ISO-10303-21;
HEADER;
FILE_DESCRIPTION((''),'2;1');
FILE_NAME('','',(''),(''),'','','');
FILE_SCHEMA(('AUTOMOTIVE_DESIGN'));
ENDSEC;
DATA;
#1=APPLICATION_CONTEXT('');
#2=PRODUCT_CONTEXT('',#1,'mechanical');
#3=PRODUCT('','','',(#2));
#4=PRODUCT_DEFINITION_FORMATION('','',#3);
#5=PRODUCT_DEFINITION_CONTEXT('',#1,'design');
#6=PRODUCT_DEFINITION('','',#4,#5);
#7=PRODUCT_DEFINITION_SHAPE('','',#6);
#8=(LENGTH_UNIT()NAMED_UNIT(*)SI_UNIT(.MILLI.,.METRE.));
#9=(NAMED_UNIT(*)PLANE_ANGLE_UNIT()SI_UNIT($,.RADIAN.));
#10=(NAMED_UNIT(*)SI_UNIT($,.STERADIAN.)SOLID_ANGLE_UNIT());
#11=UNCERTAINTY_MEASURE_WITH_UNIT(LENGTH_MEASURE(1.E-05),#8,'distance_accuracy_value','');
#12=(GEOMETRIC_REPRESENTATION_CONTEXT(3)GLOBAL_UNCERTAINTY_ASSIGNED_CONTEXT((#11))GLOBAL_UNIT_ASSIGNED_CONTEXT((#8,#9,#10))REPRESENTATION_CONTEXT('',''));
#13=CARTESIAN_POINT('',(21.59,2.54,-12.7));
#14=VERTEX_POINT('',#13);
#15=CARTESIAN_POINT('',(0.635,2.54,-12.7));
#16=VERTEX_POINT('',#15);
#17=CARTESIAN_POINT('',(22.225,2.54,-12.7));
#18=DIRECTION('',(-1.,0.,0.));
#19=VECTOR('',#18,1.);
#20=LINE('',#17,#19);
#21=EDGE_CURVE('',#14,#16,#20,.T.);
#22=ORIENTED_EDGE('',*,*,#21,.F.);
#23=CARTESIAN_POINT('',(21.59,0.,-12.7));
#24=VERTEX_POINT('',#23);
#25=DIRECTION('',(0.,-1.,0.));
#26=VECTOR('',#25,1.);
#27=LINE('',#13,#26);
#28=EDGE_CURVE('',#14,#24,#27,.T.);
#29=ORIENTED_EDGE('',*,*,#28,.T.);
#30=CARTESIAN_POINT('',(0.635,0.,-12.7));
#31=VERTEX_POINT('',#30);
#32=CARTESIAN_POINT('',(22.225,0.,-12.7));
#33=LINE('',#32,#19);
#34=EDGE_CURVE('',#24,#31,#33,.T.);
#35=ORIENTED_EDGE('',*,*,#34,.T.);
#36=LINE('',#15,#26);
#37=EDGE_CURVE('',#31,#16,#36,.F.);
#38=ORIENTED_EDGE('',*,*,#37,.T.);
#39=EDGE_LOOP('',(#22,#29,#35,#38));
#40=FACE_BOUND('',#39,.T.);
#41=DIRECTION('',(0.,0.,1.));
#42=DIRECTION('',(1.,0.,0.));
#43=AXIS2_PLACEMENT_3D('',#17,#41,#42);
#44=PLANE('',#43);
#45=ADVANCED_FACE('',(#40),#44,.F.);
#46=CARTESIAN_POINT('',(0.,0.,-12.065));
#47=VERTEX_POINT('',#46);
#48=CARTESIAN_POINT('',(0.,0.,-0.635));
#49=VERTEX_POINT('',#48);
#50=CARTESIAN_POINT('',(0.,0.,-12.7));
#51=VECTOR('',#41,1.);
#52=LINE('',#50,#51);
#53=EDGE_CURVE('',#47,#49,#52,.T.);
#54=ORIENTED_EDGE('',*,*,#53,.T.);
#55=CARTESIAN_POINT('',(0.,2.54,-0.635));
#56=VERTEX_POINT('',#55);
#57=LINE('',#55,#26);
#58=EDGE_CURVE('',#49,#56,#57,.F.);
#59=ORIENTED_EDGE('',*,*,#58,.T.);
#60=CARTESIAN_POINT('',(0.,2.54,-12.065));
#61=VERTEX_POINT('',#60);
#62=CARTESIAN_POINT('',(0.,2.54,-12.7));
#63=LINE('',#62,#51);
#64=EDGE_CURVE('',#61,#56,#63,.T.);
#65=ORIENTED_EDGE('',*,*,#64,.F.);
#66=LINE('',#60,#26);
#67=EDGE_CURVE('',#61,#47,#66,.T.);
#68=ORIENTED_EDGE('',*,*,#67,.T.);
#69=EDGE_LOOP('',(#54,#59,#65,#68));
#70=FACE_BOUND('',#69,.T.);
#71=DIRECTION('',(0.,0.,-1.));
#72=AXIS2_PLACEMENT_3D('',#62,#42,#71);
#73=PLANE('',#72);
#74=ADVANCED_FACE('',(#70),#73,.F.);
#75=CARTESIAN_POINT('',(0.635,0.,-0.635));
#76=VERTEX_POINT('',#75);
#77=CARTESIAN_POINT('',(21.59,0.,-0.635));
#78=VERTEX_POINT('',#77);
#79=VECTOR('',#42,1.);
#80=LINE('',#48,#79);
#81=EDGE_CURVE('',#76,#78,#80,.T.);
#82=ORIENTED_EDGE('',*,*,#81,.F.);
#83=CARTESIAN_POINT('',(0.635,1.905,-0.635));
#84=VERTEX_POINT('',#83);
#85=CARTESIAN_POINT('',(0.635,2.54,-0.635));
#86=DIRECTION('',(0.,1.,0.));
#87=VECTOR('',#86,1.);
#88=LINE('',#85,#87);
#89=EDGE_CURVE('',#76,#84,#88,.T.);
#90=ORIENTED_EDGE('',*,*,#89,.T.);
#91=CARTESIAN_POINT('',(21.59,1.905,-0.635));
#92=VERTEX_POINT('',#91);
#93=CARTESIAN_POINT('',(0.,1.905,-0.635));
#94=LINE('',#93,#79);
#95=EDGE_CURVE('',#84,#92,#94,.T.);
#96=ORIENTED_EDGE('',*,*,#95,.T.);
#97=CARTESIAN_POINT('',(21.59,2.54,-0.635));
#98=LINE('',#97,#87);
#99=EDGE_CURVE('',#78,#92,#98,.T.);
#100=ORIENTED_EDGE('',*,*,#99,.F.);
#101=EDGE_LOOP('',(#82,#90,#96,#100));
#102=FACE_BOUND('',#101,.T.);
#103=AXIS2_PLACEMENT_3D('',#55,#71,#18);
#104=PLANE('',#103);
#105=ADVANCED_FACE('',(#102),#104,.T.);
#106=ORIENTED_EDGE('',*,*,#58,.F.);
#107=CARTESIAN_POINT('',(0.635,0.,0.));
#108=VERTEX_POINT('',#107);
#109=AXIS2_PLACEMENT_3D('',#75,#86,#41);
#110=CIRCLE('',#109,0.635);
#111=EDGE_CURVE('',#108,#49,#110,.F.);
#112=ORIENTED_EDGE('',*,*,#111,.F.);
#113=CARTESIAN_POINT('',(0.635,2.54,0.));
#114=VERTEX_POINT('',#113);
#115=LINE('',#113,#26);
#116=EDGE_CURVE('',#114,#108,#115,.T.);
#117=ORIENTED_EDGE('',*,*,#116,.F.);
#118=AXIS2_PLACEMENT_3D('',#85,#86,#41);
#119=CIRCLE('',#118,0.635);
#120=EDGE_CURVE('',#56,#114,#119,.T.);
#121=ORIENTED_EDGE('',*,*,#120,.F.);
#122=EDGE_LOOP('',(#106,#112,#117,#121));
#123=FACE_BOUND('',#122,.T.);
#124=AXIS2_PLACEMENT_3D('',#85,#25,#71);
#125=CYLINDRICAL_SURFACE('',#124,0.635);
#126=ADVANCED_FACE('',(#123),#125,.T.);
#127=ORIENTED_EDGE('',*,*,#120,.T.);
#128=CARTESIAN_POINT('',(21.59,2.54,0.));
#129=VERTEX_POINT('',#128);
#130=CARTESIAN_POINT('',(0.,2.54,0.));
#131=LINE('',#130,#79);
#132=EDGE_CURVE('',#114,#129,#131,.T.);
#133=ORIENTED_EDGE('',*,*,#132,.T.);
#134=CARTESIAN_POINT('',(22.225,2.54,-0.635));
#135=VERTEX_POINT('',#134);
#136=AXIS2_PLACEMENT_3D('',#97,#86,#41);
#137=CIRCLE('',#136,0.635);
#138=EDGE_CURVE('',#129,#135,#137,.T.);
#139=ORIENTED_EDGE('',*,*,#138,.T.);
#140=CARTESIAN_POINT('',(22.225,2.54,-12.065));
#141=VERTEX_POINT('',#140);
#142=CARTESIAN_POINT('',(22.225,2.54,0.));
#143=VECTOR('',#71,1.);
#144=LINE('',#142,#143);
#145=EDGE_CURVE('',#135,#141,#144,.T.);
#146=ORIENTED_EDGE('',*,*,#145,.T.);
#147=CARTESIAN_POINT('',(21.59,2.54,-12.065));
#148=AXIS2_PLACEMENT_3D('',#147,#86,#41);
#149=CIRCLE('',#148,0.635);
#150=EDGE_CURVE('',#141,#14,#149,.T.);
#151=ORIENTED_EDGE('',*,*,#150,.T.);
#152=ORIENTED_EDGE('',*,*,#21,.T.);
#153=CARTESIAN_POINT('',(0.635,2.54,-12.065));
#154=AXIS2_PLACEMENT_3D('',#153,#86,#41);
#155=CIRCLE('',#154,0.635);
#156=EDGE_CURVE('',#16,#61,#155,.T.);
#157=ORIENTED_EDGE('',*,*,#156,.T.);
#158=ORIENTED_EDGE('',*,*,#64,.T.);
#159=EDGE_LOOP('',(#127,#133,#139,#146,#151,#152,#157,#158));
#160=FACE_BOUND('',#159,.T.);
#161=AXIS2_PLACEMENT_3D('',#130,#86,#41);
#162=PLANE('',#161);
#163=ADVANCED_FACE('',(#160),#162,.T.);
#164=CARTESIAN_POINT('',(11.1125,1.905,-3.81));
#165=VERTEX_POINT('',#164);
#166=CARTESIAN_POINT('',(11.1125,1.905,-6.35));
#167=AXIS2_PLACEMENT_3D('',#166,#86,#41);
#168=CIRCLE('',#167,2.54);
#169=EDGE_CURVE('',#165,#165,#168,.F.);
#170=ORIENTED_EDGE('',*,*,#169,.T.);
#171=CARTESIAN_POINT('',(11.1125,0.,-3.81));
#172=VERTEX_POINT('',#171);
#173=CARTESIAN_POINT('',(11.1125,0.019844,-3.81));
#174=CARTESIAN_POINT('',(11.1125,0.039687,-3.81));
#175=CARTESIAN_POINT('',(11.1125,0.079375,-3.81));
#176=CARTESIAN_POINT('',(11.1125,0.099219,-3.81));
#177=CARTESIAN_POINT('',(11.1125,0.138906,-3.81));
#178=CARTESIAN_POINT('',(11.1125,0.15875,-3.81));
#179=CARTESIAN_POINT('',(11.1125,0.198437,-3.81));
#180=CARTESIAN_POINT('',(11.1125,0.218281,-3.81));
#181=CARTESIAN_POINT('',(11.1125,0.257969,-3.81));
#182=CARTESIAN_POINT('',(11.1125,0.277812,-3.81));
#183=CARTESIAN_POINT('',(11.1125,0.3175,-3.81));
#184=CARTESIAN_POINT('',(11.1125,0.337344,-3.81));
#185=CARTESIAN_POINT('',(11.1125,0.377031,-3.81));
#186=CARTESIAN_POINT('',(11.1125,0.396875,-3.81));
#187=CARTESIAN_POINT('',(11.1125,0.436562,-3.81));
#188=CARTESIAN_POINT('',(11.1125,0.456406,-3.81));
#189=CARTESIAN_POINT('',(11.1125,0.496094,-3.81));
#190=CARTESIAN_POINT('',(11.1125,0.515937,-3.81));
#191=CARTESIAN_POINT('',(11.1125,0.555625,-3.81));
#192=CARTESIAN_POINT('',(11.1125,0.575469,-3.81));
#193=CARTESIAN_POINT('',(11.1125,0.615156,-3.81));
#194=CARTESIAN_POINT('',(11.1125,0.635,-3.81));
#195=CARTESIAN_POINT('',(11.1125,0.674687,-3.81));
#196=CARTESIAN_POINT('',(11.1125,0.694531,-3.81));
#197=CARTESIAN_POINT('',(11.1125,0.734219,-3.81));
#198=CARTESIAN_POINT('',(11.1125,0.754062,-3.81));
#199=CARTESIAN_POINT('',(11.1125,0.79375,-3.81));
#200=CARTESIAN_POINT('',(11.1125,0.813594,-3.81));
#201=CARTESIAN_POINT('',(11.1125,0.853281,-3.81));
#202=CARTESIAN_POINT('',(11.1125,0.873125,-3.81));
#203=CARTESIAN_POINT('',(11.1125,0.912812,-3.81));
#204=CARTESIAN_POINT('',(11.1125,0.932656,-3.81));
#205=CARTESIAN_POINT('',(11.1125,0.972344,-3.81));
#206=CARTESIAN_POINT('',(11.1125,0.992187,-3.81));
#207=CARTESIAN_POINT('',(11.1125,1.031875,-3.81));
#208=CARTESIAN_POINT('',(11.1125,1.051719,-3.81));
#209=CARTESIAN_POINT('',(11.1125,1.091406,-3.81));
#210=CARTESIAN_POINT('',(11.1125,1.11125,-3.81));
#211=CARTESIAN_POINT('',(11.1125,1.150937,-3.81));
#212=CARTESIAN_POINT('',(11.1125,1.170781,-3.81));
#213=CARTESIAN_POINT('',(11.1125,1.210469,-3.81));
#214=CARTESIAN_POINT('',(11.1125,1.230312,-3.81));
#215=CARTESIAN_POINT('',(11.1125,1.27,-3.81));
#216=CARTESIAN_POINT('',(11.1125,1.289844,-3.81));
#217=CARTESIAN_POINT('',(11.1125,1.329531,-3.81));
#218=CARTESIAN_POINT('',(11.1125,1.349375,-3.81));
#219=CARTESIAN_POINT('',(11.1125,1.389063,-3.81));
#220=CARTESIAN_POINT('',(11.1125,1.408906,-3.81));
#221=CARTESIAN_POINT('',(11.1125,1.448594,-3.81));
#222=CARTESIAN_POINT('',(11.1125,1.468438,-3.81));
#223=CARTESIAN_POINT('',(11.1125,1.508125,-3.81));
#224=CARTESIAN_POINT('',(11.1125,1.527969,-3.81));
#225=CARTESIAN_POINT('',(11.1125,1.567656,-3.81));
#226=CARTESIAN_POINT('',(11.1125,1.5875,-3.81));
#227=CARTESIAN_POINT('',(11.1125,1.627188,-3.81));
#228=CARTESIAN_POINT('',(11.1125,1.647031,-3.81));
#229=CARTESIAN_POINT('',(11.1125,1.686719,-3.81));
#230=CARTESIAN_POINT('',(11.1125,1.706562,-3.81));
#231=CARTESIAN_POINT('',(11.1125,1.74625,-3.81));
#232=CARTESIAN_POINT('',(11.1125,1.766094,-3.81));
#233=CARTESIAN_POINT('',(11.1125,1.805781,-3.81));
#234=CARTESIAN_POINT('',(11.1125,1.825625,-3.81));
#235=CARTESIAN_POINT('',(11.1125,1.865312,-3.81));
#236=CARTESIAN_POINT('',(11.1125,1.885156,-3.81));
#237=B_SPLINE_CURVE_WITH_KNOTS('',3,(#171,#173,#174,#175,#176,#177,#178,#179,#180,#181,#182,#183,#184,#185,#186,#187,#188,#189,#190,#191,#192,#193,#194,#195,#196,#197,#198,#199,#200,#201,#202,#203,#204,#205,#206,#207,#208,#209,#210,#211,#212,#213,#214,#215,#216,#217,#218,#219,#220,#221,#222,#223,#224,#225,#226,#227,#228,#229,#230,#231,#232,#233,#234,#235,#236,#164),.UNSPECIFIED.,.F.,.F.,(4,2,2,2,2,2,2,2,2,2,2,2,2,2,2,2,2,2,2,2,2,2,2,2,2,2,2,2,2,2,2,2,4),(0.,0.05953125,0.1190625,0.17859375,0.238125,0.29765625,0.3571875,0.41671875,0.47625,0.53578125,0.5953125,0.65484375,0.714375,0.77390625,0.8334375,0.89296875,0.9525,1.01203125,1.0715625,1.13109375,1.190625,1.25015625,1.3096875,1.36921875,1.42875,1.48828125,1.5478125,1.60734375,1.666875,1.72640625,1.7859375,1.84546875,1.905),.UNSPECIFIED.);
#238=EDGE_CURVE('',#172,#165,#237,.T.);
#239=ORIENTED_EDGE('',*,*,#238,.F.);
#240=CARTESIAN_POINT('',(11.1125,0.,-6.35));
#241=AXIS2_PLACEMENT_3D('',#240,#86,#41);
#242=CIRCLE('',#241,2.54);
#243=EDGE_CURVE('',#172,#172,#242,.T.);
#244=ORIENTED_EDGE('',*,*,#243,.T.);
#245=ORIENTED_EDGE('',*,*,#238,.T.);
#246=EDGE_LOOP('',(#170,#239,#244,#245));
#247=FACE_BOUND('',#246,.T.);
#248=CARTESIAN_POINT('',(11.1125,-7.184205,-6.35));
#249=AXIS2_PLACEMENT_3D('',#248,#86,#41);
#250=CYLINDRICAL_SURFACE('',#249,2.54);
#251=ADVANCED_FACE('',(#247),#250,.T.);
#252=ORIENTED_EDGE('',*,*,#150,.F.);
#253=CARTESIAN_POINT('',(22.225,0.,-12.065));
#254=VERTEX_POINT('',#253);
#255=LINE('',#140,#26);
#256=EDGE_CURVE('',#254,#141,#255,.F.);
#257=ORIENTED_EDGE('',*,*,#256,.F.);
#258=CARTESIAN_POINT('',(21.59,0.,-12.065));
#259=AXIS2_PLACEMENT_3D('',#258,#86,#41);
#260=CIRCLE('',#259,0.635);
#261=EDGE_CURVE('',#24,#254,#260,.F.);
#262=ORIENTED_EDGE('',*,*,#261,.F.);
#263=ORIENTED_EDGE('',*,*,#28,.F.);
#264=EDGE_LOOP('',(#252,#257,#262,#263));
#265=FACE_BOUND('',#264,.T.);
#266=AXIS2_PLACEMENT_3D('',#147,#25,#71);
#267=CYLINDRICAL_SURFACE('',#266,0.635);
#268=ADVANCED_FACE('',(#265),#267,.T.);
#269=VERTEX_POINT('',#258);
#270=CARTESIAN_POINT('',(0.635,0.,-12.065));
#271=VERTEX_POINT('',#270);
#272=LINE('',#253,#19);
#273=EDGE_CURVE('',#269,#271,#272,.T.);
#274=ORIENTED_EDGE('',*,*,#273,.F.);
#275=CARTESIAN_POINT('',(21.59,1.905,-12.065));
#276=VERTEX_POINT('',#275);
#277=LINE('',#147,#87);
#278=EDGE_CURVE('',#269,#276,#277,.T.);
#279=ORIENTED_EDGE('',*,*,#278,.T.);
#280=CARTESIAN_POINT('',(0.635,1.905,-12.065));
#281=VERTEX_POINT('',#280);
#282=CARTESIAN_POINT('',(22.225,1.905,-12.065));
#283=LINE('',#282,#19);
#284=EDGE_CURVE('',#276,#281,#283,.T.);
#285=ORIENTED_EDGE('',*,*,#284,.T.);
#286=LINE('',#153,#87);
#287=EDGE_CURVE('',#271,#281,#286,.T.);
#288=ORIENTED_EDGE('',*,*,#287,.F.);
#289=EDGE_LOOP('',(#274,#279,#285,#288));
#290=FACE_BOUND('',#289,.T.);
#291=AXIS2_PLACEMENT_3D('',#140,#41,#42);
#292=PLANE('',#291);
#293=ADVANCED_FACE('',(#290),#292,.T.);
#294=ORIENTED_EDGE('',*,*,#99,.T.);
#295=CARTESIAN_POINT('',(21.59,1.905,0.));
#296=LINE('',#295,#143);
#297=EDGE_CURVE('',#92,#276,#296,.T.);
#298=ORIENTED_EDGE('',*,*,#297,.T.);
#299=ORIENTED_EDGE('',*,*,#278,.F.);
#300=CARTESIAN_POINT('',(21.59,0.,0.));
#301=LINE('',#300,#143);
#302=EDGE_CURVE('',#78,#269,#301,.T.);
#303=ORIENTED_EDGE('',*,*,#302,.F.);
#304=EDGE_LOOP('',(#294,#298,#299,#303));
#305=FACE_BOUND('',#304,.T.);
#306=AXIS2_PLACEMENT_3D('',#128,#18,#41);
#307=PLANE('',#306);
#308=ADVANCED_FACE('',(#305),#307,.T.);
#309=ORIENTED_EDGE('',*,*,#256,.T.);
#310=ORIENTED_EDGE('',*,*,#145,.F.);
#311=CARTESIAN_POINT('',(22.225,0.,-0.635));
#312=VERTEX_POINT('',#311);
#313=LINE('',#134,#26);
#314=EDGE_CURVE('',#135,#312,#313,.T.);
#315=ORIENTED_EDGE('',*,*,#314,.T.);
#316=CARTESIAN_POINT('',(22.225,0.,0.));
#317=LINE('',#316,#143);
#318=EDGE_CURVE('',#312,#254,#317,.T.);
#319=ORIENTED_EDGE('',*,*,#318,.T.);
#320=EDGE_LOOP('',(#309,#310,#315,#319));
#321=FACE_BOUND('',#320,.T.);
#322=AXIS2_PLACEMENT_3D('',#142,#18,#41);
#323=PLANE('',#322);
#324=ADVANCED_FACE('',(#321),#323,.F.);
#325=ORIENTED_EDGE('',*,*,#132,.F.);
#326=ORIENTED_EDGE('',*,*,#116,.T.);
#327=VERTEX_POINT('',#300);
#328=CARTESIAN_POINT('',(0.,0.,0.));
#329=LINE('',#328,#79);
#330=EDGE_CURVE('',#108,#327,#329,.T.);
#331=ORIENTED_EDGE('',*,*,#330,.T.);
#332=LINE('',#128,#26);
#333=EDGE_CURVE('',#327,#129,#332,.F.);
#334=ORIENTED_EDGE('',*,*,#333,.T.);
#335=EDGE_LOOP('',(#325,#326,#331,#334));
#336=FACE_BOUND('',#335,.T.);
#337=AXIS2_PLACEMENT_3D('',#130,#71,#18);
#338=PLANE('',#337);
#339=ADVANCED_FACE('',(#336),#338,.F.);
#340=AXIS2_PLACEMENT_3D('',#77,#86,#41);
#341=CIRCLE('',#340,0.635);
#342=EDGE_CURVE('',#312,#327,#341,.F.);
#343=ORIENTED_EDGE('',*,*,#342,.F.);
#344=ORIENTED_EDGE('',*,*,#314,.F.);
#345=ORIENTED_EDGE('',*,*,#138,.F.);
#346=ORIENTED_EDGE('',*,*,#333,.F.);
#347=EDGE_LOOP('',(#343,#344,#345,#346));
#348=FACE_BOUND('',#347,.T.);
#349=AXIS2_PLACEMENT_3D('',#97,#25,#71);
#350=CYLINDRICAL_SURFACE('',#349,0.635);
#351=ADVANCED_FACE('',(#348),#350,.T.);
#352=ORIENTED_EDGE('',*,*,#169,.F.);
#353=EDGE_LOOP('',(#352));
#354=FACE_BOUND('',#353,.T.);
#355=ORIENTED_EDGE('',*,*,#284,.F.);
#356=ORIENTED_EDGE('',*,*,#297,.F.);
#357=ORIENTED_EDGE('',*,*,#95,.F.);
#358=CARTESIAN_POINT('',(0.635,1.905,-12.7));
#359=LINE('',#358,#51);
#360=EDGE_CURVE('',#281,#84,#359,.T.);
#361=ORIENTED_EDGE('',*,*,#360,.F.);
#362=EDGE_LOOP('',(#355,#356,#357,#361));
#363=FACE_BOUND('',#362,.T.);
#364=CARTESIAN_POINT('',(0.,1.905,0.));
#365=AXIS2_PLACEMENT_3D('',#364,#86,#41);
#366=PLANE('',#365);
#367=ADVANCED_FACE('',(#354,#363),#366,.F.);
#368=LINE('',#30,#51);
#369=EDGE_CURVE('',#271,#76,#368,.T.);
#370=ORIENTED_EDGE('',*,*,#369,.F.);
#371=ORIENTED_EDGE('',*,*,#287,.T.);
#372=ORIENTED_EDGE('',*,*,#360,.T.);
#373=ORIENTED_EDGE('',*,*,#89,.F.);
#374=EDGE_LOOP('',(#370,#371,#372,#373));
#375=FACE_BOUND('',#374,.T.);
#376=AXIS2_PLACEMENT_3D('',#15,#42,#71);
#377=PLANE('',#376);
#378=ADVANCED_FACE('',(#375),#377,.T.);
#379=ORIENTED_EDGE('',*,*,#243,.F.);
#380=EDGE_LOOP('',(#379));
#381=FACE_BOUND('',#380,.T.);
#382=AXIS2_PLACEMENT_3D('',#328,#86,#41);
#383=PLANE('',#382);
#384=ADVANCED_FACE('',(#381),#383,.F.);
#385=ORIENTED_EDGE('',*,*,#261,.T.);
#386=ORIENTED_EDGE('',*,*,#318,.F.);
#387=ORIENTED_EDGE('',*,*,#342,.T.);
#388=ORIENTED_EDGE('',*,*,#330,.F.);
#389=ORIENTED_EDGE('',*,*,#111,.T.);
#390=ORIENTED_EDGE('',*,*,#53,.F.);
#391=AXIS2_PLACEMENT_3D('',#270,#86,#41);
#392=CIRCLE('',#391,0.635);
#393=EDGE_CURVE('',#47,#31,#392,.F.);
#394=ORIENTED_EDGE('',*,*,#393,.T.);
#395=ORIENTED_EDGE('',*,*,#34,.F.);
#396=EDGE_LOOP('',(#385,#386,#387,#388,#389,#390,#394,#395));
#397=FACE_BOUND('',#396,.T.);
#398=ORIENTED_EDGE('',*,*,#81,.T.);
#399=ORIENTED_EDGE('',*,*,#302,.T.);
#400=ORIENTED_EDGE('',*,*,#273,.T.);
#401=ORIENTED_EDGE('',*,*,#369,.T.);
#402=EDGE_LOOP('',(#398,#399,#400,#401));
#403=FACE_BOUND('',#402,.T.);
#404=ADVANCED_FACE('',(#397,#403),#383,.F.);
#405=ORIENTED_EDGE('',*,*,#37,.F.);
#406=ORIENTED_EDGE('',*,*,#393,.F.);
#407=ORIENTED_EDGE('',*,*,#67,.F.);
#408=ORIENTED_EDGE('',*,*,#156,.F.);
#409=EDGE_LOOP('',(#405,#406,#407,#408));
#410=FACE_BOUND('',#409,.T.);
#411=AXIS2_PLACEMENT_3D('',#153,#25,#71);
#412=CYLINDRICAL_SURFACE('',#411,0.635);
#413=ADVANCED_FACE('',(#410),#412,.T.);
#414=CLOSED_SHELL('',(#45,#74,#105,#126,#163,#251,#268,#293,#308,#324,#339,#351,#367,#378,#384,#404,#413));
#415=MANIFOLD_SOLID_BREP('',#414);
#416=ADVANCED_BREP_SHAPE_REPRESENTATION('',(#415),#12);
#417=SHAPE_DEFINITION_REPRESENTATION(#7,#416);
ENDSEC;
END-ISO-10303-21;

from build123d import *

# Parameters (mm, degrees)
SKETCH1_W           = 22.225
SKETCH1_H           = 12.7
BOSS_EXTRUDE1_DEPTH = 2.54
FILLET1_R           = 0.635
SHELL1_START        = 0.635
SHELL1_OUTLINE_W    = 1.905
SHELL1_OUTLINE_H    = 11.43
SHELL1_DEPTH        = 20.955
SKETCH2_R           = 2.54
BOSS_EXTRUDE2_DEPTH = 1.905


# Read off the part's stored shape, not the designer's step: Shell1
with BuildPart() as part:
    # Sketch1 → Boss-Extrude1 (new body)
    with BuildSketch(Plane(origin=(0, 0, 0), x_dir=(1, 0, 0), z_dir=(0, 1, 0))):
        with Locations((11.1125, 6.35)):
            Rectangle(SKETCH1_W, SKETCH1_H)
    extrude(amount=BOSS_EXTRUDE1_DEPTH)

    # Fillet1
    fillet1_edges = [part.edges().sort_by_distance(p)[0] for p in [
        (0, 1.27, -12.7),
        (22.225, 1.27, -12.7),
        (22.225, 1.27, 0),
        (0, 1.27, 0),
    ]]
    fillet(fillet1_edges, radius=FILLET1_R)

    # Shell1 outline → Shell1 (cut)
    with BuildSketch(Plane.YZ.offset(SHELL1_START)):
        with Locations((0.9525, -6.35)):
            Rectangle(SHELL1_OUTLINE_W, SHELL1_OUTLINE_H)
    extrude(amount=SHELL1_DEPTH, mode=Mode.SUBTRACT)

    # Sketch2 → Boss-Extrude2 (add)
    with BuildSketch(Plane(origin=(0, 1.905, 0), x_dir=(-1, 0, 0), z_dir=(0, -1, 0))):
        with Locations(Location((-11.1125, 6.35, 0), (0, 0, 270))):
            Circle(SKETCH2_R)
    extrude(amount=BOSS_EXTRUDE2_DEPTH)


solid = part.part
